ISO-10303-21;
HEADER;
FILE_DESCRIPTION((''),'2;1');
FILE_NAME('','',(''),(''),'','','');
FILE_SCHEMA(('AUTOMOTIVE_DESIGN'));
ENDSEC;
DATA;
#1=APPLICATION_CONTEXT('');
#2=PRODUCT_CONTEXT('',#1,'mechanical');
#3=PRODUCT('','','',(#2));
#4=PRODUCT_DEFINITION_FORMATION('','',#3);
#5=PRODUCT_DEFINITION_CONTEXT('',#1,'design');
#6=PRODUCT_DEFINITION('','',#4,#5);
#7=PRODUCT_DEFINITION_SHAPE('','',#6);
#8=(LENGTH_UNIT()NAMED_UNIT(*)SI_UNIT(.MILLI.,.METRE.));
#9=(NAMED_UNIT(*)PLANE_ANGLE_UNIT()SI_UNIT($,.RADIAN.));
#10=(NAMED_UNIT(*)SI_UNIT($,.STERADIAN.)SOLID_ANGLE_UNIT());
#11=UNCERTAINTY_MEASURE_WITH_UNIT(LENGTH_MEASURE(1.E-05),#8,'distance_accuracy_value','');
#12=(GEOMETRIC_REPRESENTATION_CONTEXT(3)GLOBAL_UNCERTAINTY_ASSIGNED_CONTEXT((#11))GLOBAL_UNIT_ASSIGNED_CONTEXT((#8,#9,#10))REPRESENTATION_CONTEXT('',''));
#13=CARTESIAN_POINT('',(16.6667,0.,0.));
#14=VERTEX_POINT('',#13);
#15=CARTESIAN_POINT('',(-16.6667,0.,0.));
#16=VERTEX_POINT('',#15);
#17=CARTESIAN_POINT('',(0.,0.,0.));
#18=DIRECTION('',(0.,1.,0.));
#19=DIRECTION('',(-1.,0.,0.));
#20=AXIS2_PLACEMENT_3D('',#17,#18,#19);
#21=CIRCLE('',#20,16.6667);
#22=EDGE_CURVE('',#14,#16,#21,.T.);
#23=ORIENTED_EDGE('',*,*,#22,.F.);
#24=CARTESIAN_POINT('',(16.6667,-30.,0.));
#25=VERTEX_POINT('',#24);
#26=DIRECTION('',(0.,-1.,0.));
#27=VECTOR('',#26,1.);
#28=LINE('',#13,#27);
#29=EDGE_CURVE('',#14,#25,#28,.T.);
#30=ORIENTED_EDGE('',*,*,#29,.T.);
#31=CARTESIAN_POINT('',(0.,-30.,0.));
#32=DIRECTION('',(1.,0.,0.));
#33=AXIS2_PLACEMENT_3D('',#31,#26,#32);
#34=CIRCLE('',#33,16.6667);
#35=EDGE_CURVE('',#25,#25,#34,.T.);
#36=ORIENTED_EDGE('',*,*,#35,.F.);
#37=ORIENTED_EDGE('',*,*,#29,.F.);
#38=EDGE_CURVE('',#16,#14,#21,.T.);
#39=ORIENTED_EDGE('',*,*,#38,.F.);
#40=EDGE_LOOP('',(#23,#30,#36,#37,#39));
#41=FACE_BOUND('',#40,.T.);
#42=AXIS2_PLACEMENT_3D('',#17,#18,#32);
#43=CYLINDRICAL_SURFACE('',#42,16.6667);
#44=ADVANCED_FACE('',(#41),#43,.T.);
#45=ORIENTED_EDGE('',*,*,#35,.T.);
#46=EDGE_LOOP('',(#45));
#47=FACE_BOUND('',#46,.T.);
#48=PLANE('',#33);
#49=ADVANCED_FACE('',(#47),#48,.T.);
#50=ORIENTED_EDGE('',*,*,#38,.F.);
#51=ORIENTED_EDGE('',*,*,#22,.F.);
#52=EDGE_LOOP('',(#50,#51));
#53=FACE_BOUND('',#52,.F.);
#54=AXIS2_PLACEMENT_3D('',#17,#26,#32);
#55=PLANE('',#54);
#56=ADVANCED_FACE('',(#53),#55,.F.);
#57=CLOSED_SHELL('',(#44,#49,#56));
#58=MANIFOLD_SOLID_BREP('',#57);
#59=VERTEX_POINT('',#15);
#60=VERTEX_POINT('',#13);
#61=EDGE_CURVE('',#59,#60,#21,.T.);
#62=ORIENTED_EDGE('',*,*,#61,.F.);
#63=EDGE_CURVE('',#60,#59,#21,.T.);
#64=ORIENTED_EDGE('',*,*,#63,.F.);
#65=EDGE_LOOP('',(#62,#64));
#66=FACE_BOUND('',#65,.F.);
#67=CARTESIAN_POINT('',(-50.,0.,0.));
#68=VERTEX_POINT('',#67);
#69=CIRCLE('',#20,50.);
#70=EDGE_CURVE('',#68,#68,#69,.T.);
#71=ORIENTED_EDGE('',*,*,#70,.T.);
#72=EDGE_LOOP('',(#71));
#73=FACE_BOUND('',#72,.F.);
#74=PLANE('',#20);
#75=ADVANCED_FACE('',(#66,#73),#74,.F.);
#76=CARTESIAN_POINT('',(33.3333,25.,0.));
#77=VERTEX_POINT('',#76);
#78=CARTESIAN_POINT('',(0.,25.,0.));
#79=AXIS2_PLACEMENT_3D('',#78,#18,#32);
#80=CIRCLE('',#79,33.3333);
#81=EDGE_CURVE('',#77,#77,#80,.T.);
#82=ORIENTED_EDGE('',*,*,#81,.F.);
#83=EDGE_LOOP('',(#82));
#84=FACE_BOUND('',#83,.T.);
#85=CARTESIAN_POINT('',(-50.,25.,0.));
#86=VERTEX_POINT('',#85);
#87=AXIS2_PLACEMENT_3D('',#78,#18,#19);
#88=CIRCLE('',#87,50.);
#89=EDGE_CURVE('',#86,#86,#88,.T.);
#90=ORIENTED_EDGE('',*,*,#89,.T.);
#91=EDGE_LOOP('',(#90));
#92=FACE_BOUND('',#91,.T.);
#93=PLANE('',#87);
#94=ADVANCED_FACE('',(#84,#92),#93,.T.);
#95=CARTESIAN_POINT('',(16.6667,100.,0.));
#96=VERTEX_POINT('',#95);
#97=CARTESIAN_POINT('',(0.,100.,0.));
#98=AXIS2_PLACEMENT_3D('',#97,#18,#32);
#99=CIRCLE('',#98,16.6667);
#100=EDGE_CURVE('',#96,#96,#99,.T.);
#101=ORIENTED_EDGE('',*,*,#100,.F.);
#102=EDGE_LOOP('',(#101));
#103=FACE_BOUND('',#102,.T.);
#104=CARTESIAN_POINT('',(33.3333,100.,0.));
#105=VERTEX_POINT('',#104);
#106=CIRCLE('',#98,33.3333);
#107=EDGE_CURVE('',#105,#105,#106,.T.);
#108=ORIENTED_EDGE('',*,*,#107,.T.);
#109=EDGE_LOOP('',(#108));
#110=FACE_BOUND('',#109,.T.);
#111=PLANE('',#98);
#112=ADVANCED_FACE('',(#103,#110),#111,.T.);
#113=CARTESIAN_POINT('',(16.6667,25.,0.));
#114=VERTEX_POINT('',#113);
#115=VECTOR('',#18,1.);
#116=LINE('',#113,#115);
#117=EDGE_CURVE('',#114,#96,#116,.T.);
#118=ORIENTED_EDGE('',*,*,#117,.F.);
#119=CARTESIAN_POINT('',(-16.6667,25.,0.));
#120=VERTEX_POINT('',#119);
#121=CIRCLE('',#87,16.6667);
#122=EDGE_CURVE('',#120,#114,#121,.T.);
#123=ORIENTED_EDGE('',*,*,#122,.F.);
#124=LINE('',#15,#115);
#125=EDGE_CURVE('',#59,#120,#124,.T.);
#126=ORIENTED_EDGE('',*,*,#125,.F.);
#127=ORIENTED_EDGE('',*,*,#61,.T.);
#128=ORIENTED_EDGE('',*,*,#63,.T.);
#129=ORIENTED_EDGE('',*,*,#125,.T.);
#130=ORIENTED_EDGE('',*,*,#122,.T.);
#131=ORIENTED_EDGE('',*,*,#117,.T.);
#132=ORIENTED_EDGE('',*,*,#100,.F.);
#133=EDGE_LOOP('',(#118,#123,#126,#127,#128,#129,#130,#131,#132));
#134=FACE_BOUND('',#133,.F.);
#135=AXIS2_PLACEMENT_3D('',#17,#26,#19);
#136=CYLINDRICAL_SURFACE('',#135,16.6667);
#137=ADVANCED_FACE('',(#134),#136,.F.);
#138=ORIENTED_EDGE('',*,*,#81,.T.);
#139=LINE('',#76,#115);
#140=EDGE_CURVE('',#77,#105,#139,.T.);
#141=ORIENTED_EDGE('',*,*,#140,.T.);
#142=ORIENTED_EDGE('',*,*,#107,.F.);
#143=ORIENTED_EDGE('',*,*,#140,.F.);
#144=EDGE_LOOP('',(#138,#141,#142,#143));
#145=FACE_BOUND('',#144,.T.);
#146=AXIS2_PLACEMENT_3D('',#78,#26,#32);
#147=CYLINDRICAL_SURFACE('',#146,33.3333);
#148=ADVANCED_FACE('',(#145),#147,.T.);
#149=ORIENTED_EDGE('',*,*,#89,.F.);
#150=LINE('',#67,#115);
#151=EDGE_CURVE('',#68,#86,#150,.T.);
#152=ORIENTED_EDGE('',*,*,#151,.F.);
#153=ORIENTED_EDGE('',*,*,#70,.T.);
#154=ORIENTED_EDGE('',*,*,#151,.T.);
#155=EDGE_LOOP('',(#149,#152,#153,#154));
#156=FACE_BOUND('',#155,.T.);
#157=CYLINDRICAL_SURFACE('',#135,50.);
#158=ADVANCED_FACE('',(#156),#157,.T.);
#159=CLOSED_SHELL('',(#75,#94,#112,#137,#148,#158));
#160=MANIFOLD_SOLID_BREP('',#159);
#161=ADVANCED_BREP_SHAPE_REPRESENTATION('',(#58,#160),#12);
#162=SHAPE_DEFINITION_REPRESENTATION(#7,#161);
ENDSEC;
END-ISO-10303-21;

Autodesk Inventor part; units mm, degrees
ref_plane "YZ Plane" through (0, 0, 0) normal (1, 0, 0) x (0, 1, 0)
ref_plane "XZ Plane" through (0, 0, 0) normal (0, 1, 0) x (-1, 0, 0)
ref_plane "XY Plane" through (0, 0, 0) normal (0, 0, 1) x (1, 0, 0)
sketch "Boceto1" plane through (0, 0, 0) normal (0, 1, 0) x (-1, 0, 0)
  circle A0 centre (0, 0) radius 50
  circle A1 centre (0, 0) radius 16.6667
  dimension "d0" = 100
  dimension "d1" = 33.3333
extrude "Extrusión1" add sketch "Boceto1" along normal blind 25
sketch "Boceto2" plane through (0, 25, 0) normal (0, 1, 0) x (1, 0, 0)
  circle A0 centre (0, 0) radius 33.3333
  circle A1 centre (0, 0) radius 50 projected
  circle A2 centre (0, 0) radius 16.6667 projected
  dimension "d4" = 66.6667
  dimension "d5" = 100
extrude "Extrusión2" add sketch "Boceto2" along normal blind 75 contours A0
sketch "Boceto3" plane through (0, 0, 0) normal (0, -1, 0) x (1, 0, 0)
  circle A0 centre (0, 0) radius 16.6667 projected
extrude "Extrusión3" add sketch "Boceto3" along normal blind 30
equation "\"d1\" = 0.333333 * d0"
equation "\"d4\" = 0.666667 * d5"
properties part number "Rodillo1"
